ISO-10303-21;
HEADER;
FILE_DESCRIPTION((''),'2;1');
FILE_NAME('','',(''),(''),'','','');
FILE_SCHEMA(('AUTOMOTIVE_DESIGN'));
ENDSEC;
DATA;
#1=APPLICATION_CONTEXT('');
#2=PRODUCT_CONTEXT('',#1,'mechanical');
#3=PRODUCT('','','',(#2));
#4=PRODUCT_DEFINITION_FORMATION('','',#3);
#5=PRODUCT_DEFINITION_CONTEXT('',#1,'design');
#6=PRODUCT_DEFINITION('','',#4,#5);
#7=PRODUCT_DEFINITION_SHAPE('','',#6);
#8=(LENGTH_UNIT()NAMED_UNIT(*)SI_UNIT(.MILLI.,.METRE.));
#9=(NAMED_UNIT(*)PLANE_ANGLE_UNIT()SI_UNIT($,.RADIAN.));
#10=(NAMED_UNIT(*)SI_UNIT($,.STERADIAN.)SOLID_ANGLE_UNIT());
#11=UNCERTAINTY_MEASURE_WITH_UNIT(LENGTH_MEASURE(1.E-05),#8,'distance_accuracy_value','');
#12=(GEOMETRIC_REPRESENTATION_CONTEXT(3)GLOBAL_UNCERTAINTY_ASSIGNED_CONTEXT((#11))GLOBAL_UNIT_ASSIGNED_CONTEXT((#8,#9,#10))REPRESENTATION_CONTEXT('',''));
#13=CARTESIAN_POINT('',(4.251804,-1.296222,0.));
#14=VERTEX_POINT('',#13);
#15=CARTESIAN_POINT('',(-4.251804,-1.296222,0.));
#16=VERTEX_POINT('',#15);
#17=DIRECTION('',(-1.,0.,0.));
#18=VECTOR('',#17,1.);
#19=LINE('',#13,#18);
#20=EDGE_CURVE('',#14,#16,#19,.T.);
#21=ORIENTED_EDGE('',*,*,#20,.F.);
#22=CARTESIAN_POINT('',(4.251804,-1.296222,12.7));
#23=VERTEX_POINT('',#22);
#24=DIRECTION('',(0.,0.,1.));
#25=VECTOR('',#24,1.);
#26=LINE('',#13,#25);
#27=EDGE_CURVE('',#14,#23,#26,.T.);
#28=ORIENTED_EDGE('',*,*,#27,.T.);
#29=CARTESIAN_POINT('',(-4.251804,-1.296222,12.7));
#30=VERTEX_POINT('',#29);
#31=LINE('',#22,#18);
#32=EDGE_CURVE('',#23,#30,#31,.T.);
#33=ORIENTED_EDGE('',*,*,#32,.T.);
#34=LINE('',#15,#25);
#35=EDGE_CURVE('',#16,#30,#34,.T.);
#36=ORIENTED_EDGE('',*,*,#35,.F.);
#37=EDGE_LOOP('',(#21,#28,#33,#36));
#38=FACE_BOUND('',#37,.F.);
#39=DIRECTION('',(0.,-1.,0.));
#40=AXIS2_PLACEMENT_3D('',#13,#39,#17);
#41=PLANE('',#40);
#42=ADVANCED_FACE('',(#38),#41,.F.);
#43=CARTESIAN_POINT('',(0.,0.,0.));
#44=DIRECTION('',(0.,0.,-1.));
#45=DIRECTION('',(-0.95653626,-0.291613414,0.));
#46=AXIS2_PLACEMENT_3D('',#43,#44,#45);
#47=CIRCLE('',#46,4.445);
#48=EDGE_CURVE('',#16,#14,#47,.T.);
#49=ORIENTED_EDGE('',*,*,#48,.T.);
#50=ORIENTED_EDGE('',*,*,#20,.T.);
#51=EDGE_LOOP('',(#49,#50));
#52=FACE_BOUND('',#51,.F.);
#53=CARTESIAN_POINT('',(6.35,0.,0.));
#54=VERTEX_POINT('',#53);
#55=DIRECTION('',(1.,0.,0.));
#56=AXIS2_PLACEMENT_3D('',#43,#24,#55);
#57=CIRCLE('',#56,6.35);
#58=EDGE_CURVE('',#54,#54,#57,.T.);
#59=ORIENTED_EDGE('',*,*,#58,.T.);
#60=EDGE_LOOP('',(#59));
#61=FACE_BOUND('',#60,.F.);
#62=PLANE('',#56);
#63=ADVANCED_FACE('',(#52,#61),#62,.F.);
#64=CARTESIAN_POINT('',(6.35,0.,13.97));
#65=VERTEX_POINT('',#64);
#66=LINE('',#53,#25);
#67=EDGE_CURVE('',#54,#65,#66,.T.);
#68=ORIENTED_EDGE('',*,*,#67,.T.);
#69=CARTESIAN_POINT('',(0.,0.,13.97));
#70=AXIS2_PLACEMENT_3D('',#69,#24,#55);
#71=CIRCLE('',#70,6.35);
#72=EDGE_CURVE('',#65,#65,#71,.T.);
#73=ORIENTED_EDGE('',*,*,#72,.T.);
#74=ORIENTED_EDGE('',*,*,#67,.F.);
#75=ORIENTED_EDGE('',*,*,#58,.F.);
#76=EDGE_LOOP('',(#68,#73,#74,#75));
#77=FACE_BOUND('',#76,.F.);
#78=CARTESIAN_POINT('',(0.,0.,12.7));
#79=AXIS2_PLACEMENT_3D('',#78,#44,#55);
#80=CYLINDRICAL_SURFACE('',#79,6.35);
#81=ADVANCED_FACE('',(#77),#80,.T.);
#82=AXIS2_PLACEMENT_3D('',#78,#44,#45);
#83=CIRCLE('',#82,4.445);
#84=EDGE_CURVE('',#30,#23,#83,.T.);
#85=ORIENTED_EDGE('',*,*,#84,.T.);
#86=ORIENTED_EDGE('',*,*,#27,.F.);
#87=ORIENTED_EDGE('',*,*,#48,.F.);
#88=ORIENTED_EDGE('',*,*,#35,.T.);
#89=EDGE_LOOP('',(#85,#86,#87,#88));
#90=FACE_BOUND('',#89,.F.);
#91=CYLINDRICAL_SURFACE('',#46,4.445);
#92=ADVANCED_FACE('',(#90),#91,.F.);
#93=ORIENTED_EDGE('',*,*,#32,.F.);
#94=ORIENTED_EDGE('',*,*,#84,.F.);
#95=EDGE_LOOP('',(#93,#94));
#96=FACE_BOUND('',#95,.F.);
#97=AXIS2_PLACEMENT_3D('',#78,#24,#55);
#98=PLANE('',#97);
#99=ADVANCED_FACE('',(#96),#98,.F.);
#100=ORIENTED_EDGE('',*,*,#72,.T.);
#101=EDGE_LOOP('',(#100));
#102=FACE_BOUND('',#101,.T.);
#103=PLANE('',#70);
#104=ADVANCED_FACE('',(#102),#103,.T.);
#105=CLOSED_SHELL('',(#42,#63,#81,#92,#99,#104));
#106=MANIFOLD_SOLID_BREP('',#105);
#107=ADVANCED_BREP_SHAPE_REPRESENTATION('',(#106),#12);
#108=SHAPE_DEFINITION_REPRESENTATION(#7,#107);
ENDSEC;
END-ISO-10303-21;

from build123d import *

# Parameters (mm, degrees)
F0_R     = 6.35
F1_DEPTH = 12.7
F3_R     = 6.35
F4_DEPTH = 1.27


# Not quite as in the source:
# - a feature names something its author has since deleted; it is built from what else it names


with BuildPart() as f1:
    # F0 (on Top) → F1 (new body)
    with BuildSketch(Plane.XY):
        Circle(F0_R)
        with BuildLine():
            ThreePointArc((-4.2518036763, -1.296221624), (0, 4.445), (4.2518036763, -1.296221624))
            Line((4.2518036763, -1.296221624), (-4.2518036763, -1.296221624))
        make_face(mode=Mode.SUBTRACT)
    extrude(amount=F1_DEPTH)

    # F3 (on offset) → F4 (join)
    with BuildSketch(Plane.XY.offset(12.7)):
        Circle(F3_R)
    extrude(amount=F4_DEPTH)


solid = f1.part
